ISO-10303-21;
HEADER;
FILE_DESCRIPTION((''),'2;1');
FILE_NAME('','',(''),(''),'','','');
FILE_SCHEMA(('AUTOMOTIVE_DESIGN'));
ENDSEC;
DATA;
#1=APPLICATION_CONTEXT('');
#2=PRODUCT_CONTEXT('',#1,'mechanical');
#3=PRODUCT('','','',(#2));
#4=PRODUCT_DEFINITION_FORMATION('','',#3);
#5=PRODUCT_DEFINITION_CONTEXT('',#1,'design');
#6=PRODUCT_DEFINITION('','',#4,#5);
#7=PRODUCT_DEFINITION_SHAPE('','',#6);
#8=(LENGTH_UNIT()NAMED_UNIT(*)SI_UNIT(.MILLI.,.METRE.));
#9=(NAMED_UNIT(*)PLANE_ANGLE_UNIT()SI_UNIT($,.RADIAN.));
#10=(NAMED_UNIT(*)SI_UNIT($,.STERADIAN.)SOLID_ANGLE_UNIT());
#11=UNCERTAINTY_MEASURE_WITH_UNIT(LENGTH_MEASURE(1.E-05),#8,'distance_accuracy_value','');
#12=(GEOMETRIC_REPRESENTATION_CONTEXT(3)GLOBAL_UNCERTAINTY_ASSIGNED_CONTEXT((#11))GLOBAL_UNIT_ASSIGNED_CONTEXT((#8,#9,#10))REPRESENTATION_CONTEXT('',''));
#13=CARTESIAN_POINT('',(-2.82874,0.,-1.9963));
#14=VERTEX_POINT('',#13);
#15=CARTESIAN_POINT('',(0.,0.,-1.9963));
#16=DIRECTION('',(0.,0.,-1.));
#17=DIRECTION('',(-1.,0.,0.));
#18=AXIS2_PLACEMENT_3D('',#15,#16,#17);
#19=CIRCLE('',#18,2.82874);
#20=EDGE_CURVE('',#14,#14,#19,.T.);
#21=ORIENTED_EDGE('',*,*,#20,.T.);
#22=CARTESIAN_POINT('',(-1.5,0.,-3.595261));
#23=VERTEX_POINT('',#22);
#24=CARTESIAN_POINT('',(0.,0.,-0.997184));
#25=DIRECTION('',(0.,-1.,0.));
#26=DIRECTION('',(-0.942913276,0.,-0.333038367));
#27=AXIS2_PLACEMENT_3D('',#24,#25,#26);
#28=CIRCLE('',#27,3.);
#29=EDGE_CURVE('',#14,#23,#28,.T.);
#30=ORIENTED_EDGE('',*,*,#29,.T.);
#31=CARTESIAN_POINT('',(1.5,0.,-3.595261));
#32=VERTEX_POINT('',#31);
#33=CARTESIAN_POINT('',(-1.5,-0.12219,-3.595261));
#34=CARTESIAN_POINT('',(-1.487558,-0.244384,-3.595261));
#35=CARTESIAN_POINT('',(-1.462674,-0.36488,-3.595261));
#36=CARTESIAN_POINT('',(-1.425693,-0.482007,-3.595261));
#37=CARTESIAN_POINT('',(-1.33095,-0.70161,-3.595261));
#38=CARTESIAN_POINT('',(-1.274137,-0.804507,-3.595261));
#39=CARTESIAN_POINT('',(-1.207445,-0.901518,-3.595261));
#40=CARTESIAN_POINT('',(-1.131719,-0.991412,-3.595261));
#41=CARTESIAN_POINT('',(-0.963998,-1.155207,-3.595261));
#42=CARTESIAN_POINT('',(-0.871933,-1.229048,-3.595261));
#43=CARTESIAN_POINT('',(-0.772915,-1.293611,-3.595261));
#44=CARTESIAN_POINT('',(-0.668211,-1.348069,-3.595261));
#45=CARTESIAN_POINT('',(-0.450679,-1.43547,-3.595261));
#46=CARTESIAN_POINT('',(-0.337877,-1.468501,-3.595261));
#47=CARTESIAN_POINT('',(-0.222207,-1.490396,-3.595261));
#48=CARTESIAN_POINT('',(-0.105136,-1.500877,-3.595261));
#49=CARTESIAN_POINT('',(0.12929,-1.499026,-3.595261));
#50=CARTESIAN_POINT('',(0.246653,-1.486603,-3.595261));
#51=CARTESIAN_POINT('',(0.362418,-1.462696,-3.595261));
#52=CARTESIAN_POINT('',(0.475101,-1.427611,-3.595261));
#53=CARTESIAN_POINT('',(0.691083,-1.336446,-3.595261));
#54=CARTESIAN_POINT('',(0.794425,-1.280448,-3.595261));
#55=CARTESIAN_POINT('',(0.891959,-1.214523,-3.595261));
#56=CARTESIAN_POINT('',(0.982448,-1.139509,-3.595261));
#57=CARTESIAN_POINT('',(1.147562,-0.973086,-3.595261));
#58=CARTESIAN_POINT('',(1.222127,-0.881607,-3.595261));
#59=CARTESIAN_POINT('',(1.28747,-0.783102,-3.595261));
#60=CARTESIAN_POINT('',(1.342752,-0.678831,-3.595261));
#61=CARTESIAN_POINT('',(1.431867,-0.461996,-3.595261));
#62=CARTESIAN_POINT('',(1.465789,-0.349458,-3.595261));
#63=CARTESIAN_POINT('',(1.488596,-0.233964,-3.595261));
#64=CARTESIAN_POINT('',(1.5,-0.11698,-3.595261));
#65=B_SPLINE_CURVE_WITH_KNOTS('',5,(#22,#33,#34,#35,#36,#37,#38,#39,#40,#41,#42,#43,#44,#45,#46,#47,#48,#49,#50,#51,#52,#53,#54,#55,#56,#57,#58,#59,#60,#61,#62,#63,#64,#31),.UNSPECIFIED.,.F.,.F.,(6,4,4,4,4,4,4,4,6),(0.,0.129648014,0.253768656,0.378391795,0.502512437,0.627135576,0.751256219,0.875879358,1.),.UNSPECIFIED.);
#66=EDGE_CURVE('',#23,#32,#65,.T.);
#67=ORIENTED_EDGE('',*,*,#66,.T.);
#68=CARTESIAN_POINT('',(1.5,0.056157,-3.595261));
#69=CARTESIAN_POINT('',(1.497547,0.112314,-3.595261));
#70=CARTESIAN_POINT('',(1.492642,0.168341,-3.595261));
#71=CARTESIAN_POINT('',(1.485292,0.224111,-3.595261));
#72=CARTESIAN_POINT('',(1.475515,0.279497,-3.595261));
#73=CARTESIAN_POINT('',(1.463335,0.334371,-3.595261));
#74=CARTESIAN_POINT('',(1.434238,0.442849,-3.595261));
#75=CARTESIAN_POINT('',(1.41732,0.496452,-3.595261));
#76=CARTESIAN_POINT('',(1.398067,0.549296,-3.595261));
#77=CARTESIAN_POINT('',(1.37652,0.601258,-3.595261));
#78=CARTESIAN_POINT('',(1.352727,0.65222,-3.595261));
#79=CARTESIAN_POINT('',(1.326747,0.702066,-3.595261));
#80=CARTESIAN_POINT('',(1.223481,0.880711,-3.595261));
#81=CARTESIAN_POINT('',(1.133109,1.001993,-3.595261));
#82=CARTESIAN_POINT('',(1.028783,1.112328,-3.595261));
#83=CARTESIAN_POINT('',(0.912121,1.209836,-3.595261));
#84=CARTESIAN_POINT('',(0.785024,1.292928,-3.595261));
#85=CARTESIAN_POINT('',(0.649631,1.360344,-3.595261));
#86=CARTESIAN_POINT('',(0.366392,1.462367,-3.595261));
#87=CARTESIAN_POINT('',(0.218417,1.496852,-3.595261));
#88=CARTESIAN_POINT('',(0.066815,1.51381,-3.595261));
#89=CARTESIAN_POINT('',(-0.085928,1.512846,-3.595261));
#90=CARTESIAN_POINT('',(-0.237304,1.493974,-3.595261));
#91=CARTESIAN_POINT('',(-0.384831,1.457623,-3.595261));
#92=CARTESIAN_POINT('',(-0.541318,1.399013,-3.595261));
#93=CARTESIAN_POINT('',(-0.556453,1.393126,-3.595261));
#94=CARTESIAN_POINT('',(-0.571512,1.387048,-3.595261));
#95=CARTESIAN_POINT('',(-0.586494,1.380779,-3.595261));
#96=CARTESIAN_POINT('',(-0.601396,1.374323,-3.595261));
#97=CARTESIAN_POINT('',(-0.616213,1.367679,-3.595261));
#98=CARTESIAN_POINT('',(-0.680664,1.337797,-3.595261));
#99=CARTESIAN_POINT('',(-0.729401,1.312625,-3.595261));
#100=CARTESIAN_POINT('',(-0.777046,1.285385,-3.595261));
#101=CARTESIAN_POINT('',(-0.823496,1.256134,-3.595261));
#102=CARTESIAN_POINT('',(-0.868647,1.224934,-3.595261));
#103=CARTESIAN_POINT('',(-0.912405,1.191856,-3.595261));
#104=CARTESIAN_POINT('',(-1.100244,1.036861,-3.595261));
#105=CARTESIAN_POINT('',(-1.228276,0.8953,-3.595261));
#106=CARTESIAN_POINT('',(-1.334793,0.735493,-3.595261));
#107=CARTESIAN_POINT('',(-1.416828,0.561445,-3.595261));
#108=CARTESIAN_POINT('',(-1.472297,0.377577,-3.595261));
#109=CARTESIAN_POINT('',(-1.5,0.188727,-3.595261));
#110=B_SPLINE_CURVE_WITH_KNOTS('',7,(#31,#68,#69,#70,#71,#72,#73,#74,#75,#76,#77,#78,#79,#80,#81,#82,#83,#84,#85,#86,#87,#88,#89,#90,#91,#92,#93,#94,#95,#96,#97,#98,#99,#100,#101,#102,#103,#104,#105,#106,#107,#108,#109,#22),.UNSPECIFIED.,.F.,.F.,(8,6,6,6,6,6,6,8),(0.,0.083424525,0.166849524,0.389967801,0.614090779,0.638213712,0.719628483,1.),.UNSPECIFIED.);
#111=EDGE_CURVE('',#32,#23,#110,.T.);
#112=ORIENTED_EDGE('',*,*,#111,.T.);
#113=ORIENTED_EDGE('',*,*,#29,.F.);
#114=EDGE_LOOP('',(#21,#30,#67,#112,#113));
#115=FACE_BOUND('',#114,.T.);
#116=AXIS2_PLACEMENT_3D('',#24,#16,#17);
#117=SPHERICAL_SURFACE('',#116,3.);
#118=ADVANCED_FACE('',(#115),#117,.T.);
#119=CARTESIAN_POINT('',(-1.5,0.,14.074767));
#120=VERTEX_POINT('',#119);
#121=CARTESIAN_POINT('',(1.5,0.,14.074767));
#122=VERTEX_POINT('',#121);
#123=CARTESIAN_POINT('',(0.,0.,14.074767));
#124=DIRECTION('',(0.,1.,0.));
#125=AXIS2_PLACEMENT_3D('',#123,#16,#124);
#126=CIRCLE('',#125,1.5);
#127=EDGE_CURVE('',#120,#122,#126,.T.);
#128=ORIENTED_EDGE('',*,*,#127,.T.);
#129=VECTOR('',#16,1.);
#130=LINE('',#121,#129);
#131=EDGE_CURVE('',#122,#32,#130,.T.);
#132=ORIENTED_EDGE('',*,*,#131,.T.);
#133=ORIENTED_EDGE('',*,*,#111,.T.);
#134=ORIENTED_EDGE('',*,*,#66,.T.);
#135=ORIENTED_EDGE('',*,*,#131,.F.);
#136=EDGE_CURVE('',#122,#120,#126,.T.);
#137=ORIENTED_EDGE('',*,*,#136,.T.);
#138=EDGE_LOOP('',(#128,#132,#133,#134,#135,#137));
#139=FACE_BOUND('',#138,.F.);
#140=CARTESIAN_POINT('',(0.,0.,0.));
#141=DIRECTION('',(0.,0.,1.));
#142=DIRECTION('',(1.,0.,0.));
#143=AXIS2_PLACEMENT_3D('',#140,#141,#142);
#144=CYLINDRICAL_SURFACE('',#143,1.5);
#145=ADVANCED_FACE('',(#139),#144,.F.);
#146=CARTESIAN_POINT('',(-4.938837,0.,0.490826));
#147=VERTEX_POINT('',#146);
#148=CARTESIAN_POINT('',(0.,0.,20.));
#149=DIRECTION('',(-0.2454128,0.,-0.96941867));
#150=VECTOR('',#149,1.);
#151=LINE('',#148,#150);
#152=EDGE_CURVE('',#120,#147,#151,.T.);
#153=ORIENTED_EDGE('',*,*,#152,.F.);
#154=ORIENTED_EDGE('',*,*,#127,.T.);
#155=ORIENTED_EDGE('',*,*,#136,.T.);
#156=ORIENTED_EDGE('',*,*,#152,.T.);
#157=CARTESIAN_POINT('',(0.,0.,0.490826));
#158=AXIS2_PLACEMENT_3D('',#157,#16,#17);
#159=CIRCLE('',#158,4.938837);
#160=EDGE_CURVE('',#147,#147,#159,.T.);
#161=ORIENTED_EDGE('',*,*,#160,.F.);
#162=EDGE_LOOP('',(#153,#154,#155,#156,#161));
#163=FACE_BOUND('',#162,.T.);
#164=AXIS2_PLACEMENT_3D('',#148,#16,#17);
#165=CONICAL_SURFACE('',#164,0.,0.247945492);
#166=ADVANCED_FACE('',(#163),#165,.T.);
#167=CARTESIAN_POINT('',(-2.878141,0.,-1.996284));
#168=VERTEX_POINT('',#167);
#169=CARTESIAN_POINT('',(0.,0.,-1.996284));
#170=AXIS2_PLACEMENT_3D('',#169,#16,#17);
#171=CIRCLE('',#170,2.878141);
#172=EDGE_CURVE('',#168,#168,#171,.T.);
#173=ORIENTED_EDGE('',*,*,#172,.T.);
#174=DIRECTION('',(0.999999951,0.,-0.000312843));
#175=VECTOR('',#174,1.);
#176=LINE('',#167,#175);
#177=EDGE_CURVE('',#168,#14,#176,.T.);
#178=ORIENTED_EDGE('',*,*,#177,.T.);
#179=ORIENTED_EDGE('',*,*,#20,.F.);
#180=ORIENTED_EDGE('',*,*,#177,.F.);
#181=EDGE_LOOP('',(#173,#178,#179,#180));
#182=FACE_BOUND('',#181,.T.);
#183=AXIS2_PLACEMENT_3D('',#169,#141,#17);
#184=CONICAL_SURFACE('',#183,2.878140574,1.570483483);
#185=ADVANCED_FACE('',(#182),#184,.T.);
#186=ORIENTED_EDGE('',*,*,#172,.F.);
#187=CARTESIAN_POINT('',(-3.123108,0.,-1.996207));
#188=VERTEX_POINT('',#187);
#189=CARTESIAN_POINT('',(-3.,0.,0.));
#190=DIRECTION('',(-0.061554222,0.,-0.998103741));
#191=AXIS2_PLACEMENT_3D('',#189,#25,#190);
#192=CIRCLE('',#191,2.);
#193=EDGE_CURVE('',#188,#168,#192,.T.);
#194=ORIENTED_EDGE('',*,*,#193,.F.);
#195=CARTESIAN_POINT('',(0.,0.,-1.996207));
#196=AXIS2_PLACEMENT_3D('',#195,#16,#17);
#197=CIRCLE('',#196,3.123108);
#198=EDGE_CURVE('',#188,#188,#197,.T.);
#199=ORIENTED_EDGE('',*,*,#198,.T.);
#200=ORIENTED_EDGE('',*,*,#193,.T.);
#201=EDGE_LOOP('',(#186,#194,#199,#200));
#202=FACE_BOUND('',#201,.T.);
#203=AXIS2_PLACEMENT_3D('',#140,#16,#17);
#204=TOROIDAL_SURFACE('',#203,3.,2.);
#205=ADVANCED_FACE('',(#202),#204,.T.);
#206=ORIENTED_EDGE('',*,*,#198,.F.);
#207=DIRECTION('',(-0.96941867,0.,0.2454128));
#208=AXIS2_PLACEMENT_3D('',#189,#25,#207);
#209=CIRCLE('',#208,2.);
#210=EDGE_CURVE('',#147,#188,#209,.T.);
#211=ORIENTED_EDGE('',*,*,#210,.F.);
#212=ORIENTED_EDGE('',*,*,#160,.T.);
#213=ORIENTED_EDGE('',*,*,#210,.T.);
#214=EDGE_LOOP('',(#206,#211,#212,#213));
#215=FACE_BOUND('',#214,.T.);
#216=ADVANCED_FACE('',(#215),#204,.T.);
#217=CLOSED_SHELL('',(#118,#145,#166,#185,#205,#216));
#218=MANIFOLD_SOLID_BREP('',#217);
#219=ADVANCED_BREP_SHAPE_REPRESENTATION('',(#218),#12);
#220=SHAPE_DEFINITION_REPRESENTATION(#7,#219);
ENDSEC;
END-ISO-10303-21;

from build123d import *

# Parameters (mm, degrees)
F2_R          = 1.5
F3_DEPTH      = 3.9981844721
F3_DEPTH_BACK = 20.001


with BuildPart() as f1:
    # F0 (on Front) → F1 (revolve)
    with BuildSketch(Plane.XZ):
        with BuildLine():
            Line((-2.878140574, -1.9962841181), (-2.8287398282, -1.9962995728))
            ThreePointArc((-2.8287398282, -1.9962995728), (-1.7324339378, -3.4464032559), (0, -3.9971844721))
            Line((0, -3.9971844721), (0, 20))
            Line((0, 20), (-4.9388373396, 0.4908256009))
            ThreePointArc((-4.9388373396, 0.4908256009), (-4.6153137444, -1.1793055189), (-3.1231084445, -1.9962074819))
            Line((-3.1231084445, -1.9962074819), (-2.878140574, -1.9962841181))
        make_face()
        with BuildLine():
            ThreePointArc((-3.1231084445, -1.9962074819), (-3.0006256837, -1.9999999021), (-2.878140574, -1.9962841181))
            Line((-2.878140574, -1.9962841181), (-3.1231084445, -1.9962074819))
        make_face()
    revolve(axis=Axis((0, 0, 8.001407764), (0, 0, -1)))

    # F2 (on Top) → F3 (cut, two sides)
    with BuildSketch(Plane.XY) as f3_sk:
        Circle(F2_R)
    extrude(amount=-F3_DEPTH, mode=Mode.SUBTRACT)
    extrude(f3_sk.sketch, amount=F3_DEPTH_BACK, mode=Mode.SUBTRACT)


solid = f1.part
